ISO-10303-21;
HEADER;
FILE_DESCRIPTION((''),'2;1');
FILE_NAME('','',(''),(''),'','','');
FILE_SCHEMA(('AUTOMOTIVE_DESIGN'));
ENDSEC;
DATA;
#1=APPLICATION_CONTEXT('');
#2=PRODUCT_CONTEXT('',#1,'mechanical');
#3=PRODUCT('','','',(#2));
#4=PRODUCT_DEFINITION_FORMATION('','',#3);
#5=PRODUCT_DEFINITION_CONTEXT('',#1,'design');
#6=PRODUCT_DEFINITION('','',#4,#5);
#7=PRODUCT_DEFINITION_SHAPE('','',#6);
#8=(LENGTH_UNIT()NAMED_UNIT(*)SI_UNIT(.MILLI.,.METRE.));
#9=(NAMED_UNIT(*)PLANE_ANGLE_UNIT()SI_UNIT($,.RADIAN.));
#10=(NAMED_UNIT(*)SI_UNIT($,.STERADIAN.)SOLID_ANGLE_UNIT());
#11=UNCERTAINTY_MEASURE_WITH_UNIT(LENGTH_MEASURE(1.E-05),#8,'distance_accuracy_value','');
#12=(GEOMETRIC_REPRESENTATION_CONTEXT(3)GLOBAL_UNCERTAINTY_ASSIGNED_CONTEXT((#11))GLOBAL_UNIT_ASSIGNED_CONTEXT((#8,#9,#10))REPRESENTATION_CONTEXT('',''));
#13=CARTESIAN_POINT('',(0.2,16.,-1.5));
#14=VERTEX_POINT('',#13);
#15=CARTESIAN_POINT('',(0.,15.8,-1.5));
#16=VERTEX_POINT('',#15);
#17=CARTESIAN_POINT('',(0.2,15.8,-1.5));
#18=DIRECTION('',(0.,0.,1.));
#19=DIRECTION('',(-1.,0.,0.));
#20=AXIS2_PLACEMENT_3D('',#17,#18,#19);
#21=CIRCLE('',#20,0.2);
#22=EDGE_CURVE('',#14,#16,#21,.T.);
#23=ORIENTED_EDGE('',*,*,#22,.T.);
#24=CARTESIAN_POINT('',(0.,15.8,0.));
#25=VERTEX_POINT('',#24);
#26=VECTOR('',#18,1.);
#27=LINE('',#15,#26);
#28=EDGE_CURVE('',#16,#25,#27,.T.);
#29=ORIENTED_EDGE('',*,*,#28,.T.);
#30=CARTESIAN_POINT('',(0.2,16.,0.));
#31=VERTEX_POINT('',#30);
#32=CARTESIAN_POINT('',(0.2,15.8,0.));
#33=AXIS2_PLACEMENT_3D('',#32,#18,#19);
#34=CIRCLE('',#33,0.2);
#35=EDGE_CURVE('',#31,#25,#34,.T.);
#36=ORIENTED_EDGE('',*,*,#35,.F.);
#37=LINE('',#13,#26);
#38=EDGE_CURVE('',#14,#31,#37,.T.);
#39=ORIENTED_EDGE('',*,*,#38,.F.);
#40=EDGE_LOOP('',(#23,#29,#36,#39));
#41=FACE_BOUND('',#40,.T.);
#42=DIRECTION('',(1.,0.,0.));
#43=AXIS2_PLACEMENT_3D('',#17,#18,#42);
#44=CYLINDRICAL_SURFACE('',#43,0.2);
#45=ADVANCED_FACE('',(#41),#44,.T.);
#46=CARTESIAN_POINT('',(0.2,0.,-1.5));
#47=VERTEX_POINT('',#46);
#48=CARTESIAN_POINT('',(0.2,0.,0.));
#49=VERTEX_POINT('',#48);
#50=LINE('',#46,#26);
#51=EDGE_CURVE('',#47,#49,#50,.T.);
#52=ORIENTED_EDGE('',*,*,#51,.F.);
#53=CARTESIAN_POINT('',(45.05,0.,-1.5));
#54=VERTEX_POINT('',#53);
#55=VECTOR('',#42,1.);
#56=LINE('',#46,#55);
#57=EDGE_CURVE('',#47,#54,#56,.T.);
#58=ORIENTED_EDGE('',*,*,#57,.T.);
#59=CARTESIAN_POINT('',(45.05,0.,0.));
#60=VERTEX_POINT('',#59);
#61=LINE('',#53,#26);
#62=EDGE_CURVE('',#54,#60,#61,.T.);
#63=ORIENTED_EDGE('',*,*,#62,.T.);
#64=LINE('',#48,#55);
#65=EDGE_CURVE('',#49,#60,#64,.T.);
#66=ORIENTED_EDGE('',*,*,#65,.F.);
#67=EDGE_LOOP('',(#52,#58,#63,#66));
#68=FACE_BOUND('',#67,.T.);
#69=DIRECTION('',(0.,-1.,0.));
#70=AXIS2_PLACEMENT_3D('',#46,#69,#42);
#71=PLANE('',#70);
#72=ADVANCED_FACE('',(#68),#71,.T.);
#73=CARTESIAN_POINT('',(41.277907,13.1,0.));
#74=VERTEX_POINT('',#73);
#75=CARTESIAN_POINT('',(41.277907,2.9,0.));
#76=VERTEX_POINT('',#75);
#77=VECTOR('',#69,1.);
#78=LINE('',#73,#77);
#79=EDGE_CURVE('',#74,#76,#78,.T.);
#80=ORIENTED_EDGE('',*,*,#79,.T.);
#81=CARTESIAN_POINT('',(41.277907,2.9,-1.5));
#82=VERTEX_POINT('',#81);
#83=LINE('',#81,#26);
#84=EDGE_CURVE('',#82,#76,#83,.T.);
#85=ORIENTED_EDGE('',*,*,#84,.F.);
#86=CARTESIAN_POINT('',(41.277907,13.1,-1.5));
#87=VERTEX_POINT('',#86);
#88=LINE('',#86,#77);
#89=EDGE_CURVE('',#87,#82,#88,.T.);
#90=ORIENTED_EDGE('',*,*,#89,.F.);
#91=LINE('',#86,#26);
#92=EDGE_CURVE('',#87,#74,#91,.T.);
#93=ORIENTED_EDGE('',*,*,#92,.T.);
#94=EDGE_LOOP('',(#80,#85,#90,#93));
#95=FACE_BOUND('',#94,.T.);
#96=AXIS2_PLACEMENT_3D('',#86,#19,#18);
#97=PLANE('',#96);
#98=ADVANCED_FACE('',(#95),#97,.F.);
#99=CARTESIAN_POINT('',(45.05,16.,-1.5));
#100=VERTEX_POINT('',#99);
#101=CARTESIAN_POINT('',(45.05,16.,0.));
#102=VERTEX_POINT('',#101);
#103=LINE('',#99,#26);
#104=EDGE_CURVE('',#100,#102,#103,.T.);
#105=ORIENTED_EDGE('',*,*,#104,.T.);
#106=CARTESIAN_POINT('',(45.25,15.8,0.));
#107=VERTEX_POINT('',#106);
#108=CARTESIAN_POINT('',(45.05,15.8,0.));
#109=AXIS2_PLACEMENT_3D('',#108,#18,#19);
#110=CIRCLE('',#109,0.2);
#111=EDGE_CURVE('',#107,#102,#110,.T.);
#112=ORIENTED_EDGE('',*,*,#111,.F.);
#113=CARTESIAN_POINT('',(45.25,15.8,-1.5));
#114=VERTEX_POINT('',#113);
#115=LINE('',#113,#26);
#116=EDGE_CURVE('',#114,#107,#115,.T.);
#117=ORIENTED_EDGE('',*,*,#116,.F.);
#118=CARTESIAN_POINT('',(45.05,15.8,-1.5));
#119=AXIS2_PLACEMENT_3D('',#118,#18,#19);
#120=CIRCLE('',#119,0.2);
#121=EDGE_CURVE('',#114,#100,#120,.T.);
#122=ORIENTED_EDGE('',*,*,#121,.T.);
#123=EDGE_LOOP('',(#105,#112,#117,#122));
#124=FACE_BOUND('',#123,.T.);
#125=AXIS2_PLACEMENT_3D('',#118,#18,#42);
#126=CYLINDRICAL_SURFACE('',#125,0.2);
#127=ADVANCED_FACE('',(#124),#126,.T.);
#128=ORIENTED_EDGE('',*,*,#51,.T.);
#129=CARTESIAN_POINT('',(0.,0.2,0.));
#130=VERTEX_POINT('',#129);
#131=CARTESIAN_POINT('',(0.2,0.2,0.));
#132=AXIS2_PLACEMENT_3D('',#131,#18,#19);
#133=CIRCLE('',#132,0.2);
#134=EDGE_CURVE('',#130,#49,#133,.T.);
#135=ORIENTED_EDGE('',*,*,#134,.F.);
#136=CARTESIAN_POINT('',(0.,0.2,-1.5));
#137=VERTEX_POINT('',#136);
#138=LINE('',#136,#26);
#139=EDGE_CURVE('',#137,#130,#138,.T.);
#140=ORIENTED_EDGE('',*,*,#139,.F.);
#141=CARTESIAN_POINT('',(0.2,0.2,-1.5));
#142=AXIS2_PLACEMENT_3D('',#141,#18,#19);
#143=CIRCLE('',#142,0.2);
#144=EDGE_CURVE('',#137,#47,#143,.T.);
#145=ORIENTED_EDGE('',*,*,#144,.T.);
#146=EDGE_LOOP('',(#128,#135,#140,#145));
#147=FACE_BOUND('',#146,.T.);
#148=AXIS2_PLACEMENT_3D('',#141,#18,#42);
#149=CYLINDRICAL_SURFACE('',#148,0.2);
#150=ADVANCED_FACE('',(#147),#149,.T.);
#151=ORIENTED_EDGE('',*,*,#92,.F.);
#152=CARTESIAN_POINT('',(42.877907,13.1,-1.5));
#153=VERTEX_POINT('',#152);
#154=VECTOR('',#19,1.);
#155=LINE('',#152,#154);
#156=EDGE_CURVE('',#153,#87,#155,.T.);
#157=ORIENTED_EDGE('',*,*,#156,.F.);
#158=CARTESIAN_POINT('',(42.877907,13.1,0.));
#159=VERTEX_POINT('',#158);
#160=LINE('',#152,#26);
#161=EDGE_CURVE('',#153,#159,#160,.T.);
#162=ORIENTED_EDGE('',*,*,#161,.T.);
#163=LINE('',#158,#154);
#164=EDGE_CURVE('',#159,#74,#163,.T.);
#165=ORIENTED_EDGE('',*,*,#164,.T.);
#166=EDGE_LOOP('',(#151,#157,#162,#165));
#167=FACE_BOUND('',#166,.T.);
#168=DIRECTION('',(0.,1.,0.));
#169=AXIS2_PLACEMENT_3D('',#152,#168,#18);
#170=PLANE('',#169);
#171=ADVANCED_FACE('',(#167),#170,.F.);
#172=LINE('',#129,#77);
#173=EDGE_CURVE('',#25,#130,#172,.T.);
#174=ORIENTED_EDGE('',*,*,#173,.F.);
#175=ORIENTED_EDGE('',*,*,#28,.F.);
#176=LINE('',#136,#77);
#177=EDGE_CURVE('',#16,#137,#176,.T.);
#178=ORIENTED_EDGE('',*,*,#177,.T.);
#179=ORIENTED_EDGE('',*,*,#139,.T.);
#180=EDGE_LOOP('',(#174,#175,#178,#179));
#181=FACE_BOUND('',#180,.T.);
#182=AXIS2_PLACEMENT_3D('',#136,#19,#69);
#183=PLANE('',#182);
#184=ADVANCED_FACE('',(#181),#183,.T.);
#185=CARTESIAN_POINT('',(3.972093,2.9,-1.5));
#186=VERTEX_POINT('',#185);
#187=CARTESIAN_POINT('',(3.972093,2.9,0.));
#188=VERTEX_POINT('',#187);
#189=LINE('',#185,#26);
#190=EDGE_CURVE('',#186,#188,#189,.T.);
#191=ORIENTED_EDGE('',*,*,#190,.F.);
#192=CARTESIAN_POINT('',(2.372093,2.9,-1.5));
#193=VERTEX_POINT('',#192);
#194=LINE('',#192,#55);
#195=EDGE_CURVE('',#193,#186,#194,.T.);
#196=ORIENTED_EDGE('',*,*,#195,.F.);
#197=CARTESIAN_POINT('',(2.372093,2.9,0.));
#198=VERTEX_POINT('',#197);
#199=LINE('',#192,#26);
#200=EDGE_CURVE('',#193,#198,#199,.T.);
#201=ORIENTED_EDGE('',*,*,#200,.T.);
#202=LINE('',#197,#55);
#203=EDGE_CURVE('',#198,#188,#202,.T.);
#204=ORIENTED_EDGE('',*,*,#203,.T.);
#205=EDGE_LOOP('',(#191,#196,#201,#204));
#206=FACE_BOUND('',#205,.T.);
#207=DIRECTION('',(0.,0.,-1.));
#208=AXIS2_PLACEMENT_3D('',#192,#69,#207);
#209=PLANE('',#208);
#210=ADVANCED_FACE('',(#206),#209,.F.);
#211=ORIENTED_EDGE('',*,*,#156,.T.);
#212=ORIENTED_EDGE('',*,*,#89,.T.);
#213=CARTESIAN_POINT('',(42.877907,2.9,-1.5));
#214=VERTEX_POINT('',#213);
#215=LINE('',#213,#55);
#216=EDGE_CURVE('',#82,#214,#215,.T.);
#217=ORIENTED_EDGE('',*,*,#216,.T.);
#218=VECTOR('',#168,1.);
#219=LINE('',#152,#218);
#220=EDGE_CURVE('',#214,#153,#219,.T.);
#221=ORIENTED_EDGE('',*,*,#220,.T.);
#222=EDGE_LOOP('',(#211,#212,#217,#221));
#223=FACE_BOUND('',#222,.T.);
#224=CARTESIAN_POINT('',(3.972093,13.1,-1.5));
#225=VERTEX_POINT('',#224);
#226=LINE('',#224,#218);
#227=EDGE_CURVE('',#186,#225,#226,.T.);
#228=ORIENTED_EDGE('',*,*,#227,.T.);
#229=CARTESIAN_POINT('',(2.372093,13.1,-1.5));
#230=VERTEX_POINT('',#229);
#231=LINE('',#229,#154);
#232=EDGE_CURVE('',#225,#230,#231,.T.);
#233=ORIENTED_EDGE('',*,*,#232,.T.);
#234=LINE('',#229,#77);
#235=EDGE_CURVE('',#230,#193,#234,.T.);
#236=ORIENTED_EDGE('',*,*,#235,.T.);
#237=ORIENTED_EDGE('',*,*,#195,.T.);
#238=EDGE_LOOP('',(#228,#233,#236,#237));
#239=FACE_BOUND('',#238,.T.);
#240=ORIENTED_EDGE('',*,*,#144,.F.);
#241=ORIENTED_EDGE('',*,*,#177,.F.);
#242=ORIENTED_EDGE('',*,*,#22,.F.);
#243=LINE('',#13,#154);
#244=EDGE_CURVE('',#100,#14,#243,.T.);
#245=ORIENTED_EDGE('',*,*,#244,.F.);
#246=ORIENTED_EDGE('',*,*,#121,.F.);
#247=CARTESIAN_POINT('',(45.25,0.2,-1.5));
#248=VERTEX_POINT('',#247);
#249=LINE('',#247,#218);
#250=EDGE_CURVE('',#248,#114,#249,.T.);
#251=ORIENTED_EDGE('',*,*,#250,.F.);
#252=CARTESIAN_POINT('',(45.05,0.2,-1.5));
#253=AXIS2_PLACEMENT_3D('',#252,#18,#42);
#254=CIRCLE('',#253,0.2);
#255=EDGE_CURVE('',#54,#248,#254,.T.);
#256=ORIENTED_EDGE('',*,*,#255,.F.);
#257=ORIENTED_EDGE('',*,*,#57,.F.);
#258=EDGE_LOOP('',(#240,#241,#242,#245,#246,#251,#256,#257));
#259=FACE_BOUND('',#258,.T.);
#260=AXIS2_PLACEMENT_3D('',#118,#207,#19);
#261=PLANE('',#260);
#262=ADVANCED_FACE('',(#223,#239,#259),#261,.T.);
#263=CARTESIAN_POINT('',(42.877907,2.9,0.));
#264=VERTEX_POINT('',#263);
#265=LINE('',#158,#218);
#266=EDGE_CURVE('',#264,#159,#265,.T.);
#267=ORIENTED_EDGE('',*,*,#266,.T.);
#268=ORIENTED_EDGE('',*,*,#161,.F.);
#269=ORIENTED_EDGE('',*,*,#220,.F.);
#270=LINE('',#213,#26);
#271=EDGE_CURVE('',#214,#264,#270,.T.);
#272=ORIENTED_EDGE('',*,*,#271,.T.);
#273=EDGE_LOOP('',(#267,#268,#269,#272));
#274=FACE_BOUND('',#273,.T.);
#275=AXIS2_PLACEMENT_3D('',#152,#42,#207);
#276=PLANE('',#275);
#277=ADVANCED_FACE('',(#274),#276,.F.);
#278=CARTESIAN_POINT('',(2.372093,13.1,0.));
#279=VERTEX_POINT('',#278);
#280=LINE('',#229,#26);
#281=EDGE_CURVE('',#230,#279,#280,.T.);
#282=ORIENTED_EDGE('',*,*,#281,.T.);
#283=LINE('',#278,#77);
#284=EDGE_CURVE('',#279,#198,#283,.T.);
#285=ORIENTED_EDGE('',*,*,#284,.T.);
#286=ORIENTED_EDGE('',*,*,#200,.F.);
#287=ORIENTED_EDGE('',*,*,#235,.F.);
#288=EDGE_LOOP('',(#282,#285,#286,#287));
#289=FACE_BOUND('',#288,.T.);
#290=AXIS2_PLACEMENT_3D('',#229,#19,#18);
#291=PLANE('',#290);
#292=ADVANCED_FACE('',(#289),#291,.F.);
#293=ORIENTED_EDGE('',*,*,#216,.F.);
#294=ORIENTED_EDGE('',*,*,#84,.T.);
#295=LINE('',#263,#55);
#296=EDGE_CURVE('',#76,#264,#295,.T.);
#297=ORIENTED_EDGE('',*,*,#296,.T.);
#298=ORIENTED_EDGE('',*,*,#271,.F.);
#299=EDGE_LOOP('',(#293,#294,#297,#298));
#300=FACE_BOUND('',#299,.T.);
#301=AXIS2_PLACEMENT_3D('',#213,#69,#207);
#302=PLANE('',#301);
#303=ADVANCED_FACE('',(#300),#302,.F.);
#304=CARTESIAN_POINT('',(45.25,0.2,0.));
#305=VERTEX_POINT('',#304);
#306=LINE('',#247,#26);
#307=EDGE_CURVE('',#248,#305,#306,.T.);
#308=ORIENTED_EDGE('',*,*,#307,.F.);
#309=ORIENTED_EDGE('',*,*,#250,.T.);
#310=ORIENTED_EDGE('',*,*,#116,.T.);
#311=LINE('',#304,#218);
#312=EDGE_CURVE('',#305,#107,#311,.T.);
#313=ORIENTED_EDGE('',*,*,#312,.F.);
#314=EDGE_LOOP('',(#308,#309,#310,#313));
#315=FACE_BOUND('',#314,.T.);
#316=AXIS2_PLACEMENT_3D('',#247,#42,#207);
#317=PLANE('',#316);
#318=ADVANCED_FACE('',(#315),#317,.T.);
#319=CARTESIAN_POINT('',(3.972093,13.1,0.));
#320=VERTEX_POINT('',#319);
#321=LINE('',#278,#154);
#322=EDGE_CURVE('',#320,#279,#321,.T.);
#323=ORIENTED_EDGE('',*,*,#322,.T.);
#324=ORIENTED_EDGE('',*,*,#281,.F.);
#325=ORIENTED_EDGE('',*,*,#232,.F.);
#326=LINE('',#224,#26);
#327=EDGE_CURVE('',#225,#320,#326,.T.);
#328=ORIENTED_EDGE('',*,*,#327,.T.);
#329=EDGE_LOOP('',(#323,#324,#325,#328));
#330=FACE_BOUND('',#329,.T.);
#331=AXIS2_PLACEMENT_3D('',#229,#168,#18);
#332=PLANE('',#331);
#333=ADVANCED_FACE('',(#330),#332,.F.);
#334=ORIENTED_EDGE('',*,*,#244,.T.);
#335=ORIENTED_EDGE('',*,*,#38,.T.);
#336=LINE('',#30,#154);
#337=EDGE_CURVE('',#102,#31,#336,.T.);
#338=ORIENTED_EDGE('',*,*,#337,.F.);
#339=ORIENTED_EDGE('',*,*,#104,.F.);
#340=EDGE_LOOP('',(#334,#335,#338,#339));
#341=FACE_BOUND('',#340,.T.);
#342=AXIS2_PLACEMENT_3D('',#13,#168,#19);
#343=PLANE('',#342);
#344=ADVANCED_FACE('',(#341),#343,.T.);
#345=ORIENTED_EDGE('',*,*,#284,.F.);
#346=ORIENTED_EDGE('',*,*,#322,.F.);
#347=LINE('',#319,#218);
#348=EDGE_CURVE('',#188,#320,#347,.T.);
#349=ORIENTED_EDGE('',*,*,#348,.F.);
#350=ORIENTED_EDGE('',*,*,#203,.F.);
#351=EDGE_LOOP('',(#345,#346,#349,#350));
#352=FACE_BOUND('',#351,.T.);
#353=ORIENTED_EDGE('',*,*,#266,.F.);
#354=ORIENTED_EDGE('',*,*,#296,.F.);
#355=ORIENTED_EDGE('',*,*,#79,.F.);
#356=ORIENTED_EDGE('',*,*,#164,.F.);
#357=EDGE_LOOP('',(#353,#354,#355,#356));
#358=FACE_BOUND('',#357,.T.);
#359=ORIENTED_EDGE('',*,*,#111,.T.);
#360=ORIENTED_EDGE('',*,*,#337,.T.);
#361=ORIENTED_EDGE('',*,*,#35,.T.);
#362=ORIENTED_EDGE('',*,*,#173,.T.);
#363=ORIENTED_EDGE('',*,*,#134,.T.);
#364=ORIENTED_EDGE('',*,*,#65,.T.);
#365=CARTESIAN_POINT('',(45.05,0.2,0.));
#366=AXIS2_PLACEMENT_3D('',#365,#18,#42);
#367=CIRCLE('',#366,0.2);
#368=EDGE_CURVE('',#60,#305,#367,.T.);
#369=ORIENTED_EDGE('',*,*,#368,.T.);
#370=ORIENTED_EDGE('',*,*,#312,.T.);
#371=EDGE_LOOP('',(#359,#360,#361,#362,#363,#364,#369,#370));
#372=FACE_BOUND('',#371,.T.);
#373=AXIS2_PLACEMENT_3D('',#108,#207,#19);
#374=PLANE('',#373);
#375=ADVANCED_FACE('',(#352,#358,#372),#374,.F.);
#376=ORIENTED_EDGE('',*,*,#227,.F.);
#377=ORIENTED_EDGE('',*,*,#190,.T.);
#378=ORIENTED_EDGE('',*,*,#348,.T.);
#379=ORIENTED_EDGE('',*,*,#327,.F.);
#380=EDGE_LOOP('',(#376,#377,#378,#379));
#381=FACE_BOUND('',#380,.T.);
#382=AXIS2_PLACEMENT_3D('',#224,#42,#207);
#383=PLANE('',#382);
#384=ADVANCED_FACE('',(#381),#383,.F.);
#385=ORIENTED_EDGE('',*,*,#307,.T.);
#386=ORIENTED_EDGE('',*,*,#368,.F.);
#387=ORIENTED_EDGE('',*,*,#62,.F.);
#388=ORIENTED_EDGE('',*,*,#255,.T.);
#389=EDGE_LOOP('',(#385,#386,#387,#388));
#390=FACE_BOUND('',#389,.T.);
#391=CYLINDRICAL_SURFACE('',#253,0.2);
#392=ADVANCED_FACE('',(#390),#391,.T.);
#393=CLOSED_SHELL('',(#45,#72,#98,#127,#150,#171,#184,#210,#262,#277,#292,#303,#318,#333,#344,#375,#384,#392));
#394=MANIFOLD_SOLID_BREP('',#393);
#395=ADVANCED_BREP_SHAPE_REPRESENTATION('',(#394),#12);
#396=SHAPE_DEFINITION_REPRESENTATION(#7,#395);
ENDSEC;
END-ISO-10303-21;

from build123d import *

# Parameters (mm, degrees)
SKETCH1_W          = 1.6
SKETCH1_H          = 10.2
BASE_FLANGE1_DEPTH = 1.5


# Sheet-metal steps are written as plain solids
with BuildPart() as part:
    # Sketch1 → Base-Flange1 (new body)
    with BuildSketch(Plane.XY):
        with BuildLine():
            Line((0.2, 0), (45.05, 0))
            ThreePointArc((45.05, 0), (45.191421356, 0.058578644), (45.25, 0.2))
            Line((45.25, 0.2), (45.25, 15.8))
            ThreePointArc((45.25, 15.8), (45.191421356, 15.941421356), (45.05, 16))
            Line((45.05, 16), (0.2, 16))
            ThreePointArc((0.2, 16), (0.058578644, 15.941421356), (0, 15.8))
            Line((0, 15.8), (0, 0.2))
            ThreePointArc((0, 0.2), (0.058578644, 0.058578644), (0.2, 0))
        make_face()
        with Locations((3.172093023, 8)):
            Rectangle(SKETCH1_W, SKETCH1_H, mode=Mode.SUBTRACT)
        with Locations((42.077906977, 8)):
            Rectangle(SKETCH1_W, SKETCH1_H, mode=Mode.SUBTRACT)
    extrude(amount=-BASE_FLANGE1_DEPTH)


solid = part.part
